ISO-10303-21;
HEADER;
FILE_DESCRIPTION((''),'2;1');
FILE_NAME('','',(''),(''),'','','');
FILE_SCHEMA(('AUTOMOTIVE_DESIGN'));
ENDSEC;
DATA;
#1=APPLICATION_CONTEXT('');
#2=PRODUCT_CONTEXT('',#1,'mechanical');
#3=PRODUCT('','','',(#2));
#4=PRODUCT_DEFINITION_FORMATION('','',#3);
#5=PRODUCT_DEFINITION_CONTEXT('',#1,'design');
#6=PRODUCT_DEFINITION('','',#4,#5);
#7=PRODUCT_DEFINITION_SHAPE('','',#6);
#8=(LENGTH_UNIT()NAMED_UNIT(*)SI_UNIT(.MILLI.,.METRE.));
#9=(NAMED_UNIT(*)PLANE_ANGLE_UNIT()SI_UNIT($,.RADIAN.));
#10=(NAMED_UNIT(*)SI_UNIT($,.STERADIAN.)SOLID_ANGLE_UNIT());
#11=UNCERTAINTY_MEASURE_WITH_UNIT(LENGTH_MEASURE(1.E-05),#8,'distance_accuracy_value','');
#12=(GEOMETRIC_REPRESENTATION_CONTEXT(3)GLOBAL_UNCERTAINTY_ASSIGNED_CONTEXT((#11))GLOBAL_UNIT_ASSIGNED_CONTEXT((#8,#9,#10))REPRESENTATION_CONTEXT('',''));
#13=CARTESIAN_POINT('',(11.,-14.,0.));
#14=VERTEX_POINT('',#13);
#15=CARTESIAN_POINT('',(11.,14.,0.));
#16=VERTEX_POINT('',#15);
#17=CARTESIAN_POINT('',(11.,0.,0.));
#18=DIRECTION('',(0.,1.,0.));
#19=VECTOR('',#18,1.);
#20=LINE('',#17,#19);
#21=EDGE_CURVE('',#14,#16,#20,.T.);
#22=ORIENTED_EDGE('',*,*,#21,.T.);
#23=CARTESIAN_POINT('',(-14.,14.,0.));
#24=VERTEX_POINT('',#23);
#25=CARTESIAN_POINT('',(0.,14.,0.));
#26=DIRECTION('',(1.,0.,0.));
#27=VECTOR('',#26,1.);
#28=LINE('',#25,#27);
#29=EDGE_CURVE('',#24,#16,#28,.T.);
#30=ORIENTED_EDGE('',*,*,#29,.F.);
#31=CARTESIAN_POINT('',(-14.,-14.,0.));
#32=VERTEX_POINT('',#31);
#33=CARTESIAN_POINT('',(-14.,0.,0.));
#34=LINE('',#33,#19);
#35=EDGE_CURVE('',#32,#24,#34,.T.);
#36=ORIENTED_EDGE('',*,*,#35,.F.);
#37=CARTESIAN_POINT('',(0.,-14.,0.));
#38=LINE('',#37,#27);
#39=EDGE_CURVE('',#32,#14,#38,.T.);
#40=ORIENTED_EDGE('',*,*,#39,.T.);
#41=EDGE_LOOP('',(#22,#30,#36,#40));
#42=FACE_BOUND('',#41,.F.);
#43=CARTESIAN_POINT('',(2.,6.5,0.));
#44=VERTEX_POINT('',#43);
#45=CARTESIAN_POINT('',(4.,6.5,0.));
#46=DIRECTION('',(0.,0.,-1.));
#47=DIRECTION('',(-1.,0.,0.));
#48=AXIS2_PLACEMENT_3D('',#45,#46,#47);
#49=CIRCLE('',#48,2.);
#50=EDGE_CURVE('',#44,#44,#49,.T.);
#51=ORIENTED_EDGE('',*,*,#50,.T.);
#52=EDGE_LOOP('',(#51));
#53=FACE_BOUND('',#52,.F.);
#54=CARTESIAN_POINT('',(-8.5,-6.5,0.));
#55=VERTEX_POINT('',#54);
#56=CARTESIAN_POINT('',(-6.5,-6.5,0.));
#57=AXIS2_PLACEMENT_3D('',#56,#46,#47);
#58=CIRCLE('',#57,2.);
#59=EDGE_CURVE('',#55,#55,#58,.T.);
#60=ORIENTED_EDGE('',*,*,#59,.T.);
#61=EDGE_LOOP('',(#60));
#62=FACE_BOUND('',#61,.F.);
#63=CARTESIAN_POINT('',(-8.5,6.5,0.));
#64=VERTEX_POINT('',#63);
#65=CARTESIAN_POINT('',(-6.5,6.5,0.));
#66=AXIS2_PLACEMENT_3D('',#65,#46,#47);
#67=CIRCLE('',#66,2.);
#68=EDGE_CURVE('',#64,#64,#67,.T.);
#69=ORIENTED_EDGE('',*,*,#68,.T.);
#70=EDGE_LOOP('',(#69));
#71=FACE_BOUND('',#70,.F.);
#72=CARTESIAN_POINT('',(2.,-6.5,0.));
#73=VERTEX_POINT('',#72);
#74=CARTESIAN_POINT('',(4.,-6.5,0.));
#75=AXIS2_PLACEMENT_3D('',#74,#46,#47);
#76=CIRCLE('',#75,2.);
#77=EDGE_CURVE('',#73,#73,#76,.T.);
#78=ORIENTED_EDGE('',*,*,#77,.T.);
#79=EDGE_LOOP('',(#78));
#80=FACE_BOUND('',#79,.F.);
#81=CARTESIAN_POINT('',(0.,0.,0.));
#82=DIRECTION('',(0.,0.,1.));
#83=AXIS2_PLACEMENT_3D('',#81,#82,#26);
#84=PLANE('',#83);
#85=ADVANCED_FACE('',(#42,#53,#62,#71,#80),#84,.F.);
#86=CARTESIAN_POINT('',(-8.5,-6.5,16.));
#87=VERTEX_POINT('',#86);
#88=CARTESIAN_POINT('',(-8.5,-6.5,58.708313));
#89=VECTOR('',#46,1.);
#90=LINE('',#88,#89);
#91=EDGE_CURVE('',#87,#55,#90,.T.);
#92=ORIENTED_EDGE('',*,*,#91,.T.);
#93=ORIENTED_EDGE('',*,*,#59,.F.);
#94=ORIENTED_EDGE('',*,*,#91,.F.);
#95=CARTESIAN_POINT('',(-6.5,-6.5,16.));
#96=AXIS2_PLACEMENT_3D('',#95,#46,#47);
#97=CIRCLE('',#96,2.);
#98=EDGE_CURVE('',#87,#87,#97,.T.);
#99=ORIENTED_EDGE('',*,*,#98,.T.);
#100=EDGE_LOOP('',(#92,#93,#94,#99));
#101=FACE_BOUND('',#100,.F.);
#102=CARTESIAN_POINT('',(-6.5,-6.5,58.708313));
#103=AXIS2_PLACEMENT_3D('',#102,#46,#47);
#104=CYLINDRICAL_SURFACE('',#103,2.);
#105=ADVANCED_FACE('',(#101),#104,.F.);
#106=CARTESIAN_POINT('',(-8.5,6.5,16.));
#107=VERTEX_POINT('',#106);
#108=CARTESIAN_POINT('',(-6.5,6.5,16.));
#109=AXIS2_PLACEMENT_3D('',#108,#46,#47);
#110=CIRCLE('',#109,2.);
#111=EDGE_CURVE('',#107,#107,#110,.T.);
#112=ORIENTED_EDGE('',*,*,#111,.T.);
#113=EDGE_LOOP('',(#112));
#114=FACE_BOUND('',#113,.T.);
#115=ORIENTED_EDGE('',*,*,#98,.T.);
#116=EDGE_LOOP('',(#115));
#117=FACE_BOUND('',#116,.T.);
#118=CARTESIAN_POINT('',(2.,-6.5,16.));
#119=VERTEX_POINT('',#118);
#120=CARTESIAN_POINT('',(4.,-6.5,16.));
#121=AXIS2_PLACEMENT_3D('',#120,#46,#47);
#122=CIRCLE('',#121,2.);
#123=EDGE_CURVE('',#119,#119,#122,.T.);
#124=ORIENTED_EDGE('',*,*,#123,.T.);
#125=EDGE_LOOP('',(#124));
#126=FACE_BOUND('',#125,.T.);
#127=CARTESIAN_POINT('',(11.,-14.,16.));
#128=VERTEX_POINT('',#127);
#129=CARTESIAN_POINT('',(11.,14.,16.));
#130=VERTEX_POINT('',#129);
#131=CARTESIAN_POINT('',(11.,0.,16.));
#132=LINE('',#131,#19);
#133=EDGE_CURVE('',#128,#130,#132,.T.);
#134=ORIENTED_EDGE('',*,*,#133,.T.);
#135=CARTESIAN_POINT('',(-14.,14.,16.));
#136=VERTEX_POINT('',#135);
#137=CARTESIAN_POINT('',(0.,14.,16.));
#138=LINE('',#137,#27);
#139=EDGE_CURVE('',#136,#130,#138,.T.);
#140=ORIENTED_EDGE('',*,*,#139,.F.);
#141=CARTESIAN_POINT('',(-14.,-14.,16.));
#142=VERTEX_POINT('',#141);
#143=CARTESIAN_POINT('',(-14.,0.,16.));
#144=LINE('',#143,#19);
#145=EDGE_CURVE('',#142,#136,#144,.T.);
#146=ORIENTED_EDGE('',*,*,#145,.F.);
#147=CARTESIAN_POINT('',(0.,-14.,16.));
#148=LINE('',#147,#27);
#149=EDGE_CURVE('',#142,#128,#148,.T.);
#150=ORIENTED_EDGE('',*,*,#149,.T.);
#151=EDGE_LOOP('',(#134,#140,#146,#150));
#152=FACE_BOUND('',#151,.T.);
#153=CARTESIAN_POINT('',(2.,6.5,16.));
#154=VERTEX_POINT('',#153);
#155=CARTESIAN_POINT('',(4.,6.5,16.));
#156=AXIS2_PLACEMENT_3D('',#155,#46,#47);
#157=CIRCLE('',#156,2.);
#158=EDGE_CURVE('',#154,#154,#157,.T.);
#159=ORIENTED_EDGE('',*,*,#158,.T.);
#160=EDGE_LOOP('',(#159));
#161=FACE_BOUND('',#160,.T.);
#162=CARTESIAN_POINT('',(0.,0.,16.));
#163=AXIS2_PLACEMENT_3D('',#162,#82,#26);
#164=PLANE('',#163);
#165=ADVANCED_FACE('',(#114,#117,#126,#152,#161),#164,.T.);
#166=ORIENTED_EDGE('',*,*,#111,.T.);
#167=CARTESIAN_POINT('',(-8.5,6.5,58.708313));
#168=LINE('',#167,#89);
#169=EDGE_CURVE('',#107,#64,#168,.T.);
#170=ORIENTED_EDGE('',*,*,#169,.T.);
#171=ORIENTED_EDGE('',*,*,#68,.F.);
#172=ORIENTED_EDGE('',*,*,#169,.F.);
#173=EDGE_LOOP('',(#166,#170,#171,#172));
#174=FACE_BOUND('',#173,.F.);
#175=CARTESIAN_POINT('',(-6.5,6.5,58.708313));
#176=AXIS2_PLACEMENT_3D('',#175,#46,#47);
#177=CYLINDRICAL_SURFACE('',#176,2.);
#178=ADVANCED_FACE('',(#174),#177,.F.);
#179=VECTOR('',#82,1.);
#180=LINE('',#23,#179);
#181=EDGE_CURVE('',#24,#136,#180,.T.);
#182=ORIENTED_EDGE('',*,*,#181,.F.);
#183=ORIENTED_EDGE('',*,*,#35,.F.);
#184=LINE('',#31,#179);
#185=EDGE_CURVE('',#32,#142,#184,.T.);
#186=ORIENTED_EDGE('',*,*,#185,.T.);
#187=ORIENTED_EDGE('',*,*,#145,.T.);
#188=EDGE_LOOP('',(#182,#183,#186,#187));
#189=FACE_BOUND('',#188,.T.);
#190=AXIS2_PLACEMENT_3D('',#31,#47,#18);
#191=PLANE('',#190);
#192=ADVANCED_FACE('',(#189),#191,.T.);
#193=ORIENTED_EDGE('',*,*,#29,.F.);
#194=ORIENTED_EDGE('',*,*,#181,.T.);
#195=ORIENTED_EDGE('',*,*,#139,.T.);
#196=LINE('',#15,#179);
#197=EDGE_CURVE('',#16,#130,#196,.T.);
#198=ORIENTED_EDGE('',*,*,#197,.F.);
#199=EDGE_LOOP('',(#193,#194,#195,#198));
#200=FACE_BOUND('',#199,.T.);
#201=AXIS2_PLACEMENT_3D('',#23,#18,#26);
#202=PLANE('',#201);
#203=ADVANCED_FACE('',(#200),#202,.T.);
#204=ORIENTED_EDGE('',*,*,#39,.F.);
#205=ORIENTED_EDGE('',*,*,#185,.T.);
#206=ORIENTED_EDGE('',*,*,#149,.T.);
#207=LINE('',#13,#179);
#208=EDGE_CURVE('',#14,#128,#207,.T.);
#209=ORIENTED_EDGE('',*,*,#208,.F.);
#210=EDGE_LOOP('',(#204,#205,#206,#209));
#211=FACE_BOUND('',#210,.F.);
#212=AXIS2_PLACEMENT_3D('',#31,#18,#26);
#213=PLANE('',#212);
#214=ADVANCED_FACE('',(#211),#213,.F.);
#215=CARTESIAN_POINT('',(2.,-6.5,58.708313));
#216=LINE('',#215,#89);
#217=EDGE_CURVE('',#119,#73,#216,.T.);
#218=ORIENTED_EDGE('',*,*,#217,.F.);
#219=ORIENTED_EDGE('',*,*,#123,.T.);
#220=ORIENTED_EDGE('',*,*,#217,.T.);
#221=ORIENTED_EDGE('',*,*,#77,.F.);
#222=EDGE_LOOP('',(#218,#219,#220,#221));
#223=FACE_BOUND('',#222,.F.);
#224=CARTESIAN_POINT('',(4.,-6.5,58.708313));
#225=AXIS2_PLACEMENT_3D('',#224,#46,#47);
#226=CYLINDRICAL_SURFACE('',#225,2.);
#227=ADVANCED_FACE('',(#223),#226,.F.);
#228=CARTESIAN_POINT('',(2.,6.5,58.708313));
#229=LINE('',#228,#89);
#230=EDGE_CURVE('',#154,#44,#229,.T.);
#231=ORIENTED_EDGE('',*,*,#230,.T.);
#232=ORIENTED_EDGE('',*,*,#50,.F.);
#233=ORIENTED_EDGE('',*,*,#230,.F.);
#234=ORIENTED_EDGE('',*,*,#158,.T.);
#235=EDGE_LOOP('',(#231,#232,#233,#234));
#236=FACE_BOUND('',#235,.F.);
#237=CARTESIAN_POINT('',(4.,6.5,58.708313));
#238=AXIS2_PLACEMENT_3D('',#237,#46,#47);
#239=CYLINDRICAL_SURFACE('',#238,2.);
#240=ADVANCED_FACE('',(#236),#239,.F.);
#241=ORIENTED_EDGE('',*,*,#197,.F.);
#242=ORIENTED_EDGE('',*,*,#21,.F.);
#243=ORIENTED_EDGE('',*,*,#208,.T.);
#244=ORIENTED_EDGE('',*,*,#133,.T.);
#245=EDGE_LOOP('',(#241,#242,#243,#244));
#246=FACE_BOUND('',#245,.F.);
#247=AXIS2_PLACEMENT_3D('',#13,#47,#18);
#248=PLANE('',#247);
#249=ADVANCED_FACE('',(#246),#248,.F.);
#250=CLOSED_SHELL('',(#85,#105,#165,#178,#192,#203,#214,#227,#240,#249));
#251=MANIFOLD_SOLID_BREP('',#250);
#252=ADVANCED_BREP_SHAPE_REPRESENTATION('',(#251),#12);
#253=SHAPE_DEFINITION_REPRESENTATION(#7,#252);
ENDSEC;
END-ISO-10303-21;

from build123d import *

# Parameters (mm, degrees)
F0_W     = 28
F0_H     = 28
F1_DEPTH = 16
F3_D     = 4
F4_DEPTH = 3


with BuildPart() as f1:
    # F0 (on Top) → F1 (new body)
    with BuildSketch(Plane.XY):
        Rectangle(F0_W, F0_H)
    extrude(amount=F1_DEPTH)

    # F3 (through all)
    with Locations(Plane.XY.offset(16)):
        with Locations((4, -6.5), (-6.5, -6.5), (-6.5, 6.5), (4, 6.5)):
            Hole(F3_D / 2)

    # F4 (cut): a face of the model
    f4_faces = [f1.faces().sort_by_distance(p)[0] for p in [
        (14, 0, 8),
    ]]
    extrude(f4_faces, amount=-F4_DEPTH, mode=Mode.SUBTRACT)


solid = f1.part
